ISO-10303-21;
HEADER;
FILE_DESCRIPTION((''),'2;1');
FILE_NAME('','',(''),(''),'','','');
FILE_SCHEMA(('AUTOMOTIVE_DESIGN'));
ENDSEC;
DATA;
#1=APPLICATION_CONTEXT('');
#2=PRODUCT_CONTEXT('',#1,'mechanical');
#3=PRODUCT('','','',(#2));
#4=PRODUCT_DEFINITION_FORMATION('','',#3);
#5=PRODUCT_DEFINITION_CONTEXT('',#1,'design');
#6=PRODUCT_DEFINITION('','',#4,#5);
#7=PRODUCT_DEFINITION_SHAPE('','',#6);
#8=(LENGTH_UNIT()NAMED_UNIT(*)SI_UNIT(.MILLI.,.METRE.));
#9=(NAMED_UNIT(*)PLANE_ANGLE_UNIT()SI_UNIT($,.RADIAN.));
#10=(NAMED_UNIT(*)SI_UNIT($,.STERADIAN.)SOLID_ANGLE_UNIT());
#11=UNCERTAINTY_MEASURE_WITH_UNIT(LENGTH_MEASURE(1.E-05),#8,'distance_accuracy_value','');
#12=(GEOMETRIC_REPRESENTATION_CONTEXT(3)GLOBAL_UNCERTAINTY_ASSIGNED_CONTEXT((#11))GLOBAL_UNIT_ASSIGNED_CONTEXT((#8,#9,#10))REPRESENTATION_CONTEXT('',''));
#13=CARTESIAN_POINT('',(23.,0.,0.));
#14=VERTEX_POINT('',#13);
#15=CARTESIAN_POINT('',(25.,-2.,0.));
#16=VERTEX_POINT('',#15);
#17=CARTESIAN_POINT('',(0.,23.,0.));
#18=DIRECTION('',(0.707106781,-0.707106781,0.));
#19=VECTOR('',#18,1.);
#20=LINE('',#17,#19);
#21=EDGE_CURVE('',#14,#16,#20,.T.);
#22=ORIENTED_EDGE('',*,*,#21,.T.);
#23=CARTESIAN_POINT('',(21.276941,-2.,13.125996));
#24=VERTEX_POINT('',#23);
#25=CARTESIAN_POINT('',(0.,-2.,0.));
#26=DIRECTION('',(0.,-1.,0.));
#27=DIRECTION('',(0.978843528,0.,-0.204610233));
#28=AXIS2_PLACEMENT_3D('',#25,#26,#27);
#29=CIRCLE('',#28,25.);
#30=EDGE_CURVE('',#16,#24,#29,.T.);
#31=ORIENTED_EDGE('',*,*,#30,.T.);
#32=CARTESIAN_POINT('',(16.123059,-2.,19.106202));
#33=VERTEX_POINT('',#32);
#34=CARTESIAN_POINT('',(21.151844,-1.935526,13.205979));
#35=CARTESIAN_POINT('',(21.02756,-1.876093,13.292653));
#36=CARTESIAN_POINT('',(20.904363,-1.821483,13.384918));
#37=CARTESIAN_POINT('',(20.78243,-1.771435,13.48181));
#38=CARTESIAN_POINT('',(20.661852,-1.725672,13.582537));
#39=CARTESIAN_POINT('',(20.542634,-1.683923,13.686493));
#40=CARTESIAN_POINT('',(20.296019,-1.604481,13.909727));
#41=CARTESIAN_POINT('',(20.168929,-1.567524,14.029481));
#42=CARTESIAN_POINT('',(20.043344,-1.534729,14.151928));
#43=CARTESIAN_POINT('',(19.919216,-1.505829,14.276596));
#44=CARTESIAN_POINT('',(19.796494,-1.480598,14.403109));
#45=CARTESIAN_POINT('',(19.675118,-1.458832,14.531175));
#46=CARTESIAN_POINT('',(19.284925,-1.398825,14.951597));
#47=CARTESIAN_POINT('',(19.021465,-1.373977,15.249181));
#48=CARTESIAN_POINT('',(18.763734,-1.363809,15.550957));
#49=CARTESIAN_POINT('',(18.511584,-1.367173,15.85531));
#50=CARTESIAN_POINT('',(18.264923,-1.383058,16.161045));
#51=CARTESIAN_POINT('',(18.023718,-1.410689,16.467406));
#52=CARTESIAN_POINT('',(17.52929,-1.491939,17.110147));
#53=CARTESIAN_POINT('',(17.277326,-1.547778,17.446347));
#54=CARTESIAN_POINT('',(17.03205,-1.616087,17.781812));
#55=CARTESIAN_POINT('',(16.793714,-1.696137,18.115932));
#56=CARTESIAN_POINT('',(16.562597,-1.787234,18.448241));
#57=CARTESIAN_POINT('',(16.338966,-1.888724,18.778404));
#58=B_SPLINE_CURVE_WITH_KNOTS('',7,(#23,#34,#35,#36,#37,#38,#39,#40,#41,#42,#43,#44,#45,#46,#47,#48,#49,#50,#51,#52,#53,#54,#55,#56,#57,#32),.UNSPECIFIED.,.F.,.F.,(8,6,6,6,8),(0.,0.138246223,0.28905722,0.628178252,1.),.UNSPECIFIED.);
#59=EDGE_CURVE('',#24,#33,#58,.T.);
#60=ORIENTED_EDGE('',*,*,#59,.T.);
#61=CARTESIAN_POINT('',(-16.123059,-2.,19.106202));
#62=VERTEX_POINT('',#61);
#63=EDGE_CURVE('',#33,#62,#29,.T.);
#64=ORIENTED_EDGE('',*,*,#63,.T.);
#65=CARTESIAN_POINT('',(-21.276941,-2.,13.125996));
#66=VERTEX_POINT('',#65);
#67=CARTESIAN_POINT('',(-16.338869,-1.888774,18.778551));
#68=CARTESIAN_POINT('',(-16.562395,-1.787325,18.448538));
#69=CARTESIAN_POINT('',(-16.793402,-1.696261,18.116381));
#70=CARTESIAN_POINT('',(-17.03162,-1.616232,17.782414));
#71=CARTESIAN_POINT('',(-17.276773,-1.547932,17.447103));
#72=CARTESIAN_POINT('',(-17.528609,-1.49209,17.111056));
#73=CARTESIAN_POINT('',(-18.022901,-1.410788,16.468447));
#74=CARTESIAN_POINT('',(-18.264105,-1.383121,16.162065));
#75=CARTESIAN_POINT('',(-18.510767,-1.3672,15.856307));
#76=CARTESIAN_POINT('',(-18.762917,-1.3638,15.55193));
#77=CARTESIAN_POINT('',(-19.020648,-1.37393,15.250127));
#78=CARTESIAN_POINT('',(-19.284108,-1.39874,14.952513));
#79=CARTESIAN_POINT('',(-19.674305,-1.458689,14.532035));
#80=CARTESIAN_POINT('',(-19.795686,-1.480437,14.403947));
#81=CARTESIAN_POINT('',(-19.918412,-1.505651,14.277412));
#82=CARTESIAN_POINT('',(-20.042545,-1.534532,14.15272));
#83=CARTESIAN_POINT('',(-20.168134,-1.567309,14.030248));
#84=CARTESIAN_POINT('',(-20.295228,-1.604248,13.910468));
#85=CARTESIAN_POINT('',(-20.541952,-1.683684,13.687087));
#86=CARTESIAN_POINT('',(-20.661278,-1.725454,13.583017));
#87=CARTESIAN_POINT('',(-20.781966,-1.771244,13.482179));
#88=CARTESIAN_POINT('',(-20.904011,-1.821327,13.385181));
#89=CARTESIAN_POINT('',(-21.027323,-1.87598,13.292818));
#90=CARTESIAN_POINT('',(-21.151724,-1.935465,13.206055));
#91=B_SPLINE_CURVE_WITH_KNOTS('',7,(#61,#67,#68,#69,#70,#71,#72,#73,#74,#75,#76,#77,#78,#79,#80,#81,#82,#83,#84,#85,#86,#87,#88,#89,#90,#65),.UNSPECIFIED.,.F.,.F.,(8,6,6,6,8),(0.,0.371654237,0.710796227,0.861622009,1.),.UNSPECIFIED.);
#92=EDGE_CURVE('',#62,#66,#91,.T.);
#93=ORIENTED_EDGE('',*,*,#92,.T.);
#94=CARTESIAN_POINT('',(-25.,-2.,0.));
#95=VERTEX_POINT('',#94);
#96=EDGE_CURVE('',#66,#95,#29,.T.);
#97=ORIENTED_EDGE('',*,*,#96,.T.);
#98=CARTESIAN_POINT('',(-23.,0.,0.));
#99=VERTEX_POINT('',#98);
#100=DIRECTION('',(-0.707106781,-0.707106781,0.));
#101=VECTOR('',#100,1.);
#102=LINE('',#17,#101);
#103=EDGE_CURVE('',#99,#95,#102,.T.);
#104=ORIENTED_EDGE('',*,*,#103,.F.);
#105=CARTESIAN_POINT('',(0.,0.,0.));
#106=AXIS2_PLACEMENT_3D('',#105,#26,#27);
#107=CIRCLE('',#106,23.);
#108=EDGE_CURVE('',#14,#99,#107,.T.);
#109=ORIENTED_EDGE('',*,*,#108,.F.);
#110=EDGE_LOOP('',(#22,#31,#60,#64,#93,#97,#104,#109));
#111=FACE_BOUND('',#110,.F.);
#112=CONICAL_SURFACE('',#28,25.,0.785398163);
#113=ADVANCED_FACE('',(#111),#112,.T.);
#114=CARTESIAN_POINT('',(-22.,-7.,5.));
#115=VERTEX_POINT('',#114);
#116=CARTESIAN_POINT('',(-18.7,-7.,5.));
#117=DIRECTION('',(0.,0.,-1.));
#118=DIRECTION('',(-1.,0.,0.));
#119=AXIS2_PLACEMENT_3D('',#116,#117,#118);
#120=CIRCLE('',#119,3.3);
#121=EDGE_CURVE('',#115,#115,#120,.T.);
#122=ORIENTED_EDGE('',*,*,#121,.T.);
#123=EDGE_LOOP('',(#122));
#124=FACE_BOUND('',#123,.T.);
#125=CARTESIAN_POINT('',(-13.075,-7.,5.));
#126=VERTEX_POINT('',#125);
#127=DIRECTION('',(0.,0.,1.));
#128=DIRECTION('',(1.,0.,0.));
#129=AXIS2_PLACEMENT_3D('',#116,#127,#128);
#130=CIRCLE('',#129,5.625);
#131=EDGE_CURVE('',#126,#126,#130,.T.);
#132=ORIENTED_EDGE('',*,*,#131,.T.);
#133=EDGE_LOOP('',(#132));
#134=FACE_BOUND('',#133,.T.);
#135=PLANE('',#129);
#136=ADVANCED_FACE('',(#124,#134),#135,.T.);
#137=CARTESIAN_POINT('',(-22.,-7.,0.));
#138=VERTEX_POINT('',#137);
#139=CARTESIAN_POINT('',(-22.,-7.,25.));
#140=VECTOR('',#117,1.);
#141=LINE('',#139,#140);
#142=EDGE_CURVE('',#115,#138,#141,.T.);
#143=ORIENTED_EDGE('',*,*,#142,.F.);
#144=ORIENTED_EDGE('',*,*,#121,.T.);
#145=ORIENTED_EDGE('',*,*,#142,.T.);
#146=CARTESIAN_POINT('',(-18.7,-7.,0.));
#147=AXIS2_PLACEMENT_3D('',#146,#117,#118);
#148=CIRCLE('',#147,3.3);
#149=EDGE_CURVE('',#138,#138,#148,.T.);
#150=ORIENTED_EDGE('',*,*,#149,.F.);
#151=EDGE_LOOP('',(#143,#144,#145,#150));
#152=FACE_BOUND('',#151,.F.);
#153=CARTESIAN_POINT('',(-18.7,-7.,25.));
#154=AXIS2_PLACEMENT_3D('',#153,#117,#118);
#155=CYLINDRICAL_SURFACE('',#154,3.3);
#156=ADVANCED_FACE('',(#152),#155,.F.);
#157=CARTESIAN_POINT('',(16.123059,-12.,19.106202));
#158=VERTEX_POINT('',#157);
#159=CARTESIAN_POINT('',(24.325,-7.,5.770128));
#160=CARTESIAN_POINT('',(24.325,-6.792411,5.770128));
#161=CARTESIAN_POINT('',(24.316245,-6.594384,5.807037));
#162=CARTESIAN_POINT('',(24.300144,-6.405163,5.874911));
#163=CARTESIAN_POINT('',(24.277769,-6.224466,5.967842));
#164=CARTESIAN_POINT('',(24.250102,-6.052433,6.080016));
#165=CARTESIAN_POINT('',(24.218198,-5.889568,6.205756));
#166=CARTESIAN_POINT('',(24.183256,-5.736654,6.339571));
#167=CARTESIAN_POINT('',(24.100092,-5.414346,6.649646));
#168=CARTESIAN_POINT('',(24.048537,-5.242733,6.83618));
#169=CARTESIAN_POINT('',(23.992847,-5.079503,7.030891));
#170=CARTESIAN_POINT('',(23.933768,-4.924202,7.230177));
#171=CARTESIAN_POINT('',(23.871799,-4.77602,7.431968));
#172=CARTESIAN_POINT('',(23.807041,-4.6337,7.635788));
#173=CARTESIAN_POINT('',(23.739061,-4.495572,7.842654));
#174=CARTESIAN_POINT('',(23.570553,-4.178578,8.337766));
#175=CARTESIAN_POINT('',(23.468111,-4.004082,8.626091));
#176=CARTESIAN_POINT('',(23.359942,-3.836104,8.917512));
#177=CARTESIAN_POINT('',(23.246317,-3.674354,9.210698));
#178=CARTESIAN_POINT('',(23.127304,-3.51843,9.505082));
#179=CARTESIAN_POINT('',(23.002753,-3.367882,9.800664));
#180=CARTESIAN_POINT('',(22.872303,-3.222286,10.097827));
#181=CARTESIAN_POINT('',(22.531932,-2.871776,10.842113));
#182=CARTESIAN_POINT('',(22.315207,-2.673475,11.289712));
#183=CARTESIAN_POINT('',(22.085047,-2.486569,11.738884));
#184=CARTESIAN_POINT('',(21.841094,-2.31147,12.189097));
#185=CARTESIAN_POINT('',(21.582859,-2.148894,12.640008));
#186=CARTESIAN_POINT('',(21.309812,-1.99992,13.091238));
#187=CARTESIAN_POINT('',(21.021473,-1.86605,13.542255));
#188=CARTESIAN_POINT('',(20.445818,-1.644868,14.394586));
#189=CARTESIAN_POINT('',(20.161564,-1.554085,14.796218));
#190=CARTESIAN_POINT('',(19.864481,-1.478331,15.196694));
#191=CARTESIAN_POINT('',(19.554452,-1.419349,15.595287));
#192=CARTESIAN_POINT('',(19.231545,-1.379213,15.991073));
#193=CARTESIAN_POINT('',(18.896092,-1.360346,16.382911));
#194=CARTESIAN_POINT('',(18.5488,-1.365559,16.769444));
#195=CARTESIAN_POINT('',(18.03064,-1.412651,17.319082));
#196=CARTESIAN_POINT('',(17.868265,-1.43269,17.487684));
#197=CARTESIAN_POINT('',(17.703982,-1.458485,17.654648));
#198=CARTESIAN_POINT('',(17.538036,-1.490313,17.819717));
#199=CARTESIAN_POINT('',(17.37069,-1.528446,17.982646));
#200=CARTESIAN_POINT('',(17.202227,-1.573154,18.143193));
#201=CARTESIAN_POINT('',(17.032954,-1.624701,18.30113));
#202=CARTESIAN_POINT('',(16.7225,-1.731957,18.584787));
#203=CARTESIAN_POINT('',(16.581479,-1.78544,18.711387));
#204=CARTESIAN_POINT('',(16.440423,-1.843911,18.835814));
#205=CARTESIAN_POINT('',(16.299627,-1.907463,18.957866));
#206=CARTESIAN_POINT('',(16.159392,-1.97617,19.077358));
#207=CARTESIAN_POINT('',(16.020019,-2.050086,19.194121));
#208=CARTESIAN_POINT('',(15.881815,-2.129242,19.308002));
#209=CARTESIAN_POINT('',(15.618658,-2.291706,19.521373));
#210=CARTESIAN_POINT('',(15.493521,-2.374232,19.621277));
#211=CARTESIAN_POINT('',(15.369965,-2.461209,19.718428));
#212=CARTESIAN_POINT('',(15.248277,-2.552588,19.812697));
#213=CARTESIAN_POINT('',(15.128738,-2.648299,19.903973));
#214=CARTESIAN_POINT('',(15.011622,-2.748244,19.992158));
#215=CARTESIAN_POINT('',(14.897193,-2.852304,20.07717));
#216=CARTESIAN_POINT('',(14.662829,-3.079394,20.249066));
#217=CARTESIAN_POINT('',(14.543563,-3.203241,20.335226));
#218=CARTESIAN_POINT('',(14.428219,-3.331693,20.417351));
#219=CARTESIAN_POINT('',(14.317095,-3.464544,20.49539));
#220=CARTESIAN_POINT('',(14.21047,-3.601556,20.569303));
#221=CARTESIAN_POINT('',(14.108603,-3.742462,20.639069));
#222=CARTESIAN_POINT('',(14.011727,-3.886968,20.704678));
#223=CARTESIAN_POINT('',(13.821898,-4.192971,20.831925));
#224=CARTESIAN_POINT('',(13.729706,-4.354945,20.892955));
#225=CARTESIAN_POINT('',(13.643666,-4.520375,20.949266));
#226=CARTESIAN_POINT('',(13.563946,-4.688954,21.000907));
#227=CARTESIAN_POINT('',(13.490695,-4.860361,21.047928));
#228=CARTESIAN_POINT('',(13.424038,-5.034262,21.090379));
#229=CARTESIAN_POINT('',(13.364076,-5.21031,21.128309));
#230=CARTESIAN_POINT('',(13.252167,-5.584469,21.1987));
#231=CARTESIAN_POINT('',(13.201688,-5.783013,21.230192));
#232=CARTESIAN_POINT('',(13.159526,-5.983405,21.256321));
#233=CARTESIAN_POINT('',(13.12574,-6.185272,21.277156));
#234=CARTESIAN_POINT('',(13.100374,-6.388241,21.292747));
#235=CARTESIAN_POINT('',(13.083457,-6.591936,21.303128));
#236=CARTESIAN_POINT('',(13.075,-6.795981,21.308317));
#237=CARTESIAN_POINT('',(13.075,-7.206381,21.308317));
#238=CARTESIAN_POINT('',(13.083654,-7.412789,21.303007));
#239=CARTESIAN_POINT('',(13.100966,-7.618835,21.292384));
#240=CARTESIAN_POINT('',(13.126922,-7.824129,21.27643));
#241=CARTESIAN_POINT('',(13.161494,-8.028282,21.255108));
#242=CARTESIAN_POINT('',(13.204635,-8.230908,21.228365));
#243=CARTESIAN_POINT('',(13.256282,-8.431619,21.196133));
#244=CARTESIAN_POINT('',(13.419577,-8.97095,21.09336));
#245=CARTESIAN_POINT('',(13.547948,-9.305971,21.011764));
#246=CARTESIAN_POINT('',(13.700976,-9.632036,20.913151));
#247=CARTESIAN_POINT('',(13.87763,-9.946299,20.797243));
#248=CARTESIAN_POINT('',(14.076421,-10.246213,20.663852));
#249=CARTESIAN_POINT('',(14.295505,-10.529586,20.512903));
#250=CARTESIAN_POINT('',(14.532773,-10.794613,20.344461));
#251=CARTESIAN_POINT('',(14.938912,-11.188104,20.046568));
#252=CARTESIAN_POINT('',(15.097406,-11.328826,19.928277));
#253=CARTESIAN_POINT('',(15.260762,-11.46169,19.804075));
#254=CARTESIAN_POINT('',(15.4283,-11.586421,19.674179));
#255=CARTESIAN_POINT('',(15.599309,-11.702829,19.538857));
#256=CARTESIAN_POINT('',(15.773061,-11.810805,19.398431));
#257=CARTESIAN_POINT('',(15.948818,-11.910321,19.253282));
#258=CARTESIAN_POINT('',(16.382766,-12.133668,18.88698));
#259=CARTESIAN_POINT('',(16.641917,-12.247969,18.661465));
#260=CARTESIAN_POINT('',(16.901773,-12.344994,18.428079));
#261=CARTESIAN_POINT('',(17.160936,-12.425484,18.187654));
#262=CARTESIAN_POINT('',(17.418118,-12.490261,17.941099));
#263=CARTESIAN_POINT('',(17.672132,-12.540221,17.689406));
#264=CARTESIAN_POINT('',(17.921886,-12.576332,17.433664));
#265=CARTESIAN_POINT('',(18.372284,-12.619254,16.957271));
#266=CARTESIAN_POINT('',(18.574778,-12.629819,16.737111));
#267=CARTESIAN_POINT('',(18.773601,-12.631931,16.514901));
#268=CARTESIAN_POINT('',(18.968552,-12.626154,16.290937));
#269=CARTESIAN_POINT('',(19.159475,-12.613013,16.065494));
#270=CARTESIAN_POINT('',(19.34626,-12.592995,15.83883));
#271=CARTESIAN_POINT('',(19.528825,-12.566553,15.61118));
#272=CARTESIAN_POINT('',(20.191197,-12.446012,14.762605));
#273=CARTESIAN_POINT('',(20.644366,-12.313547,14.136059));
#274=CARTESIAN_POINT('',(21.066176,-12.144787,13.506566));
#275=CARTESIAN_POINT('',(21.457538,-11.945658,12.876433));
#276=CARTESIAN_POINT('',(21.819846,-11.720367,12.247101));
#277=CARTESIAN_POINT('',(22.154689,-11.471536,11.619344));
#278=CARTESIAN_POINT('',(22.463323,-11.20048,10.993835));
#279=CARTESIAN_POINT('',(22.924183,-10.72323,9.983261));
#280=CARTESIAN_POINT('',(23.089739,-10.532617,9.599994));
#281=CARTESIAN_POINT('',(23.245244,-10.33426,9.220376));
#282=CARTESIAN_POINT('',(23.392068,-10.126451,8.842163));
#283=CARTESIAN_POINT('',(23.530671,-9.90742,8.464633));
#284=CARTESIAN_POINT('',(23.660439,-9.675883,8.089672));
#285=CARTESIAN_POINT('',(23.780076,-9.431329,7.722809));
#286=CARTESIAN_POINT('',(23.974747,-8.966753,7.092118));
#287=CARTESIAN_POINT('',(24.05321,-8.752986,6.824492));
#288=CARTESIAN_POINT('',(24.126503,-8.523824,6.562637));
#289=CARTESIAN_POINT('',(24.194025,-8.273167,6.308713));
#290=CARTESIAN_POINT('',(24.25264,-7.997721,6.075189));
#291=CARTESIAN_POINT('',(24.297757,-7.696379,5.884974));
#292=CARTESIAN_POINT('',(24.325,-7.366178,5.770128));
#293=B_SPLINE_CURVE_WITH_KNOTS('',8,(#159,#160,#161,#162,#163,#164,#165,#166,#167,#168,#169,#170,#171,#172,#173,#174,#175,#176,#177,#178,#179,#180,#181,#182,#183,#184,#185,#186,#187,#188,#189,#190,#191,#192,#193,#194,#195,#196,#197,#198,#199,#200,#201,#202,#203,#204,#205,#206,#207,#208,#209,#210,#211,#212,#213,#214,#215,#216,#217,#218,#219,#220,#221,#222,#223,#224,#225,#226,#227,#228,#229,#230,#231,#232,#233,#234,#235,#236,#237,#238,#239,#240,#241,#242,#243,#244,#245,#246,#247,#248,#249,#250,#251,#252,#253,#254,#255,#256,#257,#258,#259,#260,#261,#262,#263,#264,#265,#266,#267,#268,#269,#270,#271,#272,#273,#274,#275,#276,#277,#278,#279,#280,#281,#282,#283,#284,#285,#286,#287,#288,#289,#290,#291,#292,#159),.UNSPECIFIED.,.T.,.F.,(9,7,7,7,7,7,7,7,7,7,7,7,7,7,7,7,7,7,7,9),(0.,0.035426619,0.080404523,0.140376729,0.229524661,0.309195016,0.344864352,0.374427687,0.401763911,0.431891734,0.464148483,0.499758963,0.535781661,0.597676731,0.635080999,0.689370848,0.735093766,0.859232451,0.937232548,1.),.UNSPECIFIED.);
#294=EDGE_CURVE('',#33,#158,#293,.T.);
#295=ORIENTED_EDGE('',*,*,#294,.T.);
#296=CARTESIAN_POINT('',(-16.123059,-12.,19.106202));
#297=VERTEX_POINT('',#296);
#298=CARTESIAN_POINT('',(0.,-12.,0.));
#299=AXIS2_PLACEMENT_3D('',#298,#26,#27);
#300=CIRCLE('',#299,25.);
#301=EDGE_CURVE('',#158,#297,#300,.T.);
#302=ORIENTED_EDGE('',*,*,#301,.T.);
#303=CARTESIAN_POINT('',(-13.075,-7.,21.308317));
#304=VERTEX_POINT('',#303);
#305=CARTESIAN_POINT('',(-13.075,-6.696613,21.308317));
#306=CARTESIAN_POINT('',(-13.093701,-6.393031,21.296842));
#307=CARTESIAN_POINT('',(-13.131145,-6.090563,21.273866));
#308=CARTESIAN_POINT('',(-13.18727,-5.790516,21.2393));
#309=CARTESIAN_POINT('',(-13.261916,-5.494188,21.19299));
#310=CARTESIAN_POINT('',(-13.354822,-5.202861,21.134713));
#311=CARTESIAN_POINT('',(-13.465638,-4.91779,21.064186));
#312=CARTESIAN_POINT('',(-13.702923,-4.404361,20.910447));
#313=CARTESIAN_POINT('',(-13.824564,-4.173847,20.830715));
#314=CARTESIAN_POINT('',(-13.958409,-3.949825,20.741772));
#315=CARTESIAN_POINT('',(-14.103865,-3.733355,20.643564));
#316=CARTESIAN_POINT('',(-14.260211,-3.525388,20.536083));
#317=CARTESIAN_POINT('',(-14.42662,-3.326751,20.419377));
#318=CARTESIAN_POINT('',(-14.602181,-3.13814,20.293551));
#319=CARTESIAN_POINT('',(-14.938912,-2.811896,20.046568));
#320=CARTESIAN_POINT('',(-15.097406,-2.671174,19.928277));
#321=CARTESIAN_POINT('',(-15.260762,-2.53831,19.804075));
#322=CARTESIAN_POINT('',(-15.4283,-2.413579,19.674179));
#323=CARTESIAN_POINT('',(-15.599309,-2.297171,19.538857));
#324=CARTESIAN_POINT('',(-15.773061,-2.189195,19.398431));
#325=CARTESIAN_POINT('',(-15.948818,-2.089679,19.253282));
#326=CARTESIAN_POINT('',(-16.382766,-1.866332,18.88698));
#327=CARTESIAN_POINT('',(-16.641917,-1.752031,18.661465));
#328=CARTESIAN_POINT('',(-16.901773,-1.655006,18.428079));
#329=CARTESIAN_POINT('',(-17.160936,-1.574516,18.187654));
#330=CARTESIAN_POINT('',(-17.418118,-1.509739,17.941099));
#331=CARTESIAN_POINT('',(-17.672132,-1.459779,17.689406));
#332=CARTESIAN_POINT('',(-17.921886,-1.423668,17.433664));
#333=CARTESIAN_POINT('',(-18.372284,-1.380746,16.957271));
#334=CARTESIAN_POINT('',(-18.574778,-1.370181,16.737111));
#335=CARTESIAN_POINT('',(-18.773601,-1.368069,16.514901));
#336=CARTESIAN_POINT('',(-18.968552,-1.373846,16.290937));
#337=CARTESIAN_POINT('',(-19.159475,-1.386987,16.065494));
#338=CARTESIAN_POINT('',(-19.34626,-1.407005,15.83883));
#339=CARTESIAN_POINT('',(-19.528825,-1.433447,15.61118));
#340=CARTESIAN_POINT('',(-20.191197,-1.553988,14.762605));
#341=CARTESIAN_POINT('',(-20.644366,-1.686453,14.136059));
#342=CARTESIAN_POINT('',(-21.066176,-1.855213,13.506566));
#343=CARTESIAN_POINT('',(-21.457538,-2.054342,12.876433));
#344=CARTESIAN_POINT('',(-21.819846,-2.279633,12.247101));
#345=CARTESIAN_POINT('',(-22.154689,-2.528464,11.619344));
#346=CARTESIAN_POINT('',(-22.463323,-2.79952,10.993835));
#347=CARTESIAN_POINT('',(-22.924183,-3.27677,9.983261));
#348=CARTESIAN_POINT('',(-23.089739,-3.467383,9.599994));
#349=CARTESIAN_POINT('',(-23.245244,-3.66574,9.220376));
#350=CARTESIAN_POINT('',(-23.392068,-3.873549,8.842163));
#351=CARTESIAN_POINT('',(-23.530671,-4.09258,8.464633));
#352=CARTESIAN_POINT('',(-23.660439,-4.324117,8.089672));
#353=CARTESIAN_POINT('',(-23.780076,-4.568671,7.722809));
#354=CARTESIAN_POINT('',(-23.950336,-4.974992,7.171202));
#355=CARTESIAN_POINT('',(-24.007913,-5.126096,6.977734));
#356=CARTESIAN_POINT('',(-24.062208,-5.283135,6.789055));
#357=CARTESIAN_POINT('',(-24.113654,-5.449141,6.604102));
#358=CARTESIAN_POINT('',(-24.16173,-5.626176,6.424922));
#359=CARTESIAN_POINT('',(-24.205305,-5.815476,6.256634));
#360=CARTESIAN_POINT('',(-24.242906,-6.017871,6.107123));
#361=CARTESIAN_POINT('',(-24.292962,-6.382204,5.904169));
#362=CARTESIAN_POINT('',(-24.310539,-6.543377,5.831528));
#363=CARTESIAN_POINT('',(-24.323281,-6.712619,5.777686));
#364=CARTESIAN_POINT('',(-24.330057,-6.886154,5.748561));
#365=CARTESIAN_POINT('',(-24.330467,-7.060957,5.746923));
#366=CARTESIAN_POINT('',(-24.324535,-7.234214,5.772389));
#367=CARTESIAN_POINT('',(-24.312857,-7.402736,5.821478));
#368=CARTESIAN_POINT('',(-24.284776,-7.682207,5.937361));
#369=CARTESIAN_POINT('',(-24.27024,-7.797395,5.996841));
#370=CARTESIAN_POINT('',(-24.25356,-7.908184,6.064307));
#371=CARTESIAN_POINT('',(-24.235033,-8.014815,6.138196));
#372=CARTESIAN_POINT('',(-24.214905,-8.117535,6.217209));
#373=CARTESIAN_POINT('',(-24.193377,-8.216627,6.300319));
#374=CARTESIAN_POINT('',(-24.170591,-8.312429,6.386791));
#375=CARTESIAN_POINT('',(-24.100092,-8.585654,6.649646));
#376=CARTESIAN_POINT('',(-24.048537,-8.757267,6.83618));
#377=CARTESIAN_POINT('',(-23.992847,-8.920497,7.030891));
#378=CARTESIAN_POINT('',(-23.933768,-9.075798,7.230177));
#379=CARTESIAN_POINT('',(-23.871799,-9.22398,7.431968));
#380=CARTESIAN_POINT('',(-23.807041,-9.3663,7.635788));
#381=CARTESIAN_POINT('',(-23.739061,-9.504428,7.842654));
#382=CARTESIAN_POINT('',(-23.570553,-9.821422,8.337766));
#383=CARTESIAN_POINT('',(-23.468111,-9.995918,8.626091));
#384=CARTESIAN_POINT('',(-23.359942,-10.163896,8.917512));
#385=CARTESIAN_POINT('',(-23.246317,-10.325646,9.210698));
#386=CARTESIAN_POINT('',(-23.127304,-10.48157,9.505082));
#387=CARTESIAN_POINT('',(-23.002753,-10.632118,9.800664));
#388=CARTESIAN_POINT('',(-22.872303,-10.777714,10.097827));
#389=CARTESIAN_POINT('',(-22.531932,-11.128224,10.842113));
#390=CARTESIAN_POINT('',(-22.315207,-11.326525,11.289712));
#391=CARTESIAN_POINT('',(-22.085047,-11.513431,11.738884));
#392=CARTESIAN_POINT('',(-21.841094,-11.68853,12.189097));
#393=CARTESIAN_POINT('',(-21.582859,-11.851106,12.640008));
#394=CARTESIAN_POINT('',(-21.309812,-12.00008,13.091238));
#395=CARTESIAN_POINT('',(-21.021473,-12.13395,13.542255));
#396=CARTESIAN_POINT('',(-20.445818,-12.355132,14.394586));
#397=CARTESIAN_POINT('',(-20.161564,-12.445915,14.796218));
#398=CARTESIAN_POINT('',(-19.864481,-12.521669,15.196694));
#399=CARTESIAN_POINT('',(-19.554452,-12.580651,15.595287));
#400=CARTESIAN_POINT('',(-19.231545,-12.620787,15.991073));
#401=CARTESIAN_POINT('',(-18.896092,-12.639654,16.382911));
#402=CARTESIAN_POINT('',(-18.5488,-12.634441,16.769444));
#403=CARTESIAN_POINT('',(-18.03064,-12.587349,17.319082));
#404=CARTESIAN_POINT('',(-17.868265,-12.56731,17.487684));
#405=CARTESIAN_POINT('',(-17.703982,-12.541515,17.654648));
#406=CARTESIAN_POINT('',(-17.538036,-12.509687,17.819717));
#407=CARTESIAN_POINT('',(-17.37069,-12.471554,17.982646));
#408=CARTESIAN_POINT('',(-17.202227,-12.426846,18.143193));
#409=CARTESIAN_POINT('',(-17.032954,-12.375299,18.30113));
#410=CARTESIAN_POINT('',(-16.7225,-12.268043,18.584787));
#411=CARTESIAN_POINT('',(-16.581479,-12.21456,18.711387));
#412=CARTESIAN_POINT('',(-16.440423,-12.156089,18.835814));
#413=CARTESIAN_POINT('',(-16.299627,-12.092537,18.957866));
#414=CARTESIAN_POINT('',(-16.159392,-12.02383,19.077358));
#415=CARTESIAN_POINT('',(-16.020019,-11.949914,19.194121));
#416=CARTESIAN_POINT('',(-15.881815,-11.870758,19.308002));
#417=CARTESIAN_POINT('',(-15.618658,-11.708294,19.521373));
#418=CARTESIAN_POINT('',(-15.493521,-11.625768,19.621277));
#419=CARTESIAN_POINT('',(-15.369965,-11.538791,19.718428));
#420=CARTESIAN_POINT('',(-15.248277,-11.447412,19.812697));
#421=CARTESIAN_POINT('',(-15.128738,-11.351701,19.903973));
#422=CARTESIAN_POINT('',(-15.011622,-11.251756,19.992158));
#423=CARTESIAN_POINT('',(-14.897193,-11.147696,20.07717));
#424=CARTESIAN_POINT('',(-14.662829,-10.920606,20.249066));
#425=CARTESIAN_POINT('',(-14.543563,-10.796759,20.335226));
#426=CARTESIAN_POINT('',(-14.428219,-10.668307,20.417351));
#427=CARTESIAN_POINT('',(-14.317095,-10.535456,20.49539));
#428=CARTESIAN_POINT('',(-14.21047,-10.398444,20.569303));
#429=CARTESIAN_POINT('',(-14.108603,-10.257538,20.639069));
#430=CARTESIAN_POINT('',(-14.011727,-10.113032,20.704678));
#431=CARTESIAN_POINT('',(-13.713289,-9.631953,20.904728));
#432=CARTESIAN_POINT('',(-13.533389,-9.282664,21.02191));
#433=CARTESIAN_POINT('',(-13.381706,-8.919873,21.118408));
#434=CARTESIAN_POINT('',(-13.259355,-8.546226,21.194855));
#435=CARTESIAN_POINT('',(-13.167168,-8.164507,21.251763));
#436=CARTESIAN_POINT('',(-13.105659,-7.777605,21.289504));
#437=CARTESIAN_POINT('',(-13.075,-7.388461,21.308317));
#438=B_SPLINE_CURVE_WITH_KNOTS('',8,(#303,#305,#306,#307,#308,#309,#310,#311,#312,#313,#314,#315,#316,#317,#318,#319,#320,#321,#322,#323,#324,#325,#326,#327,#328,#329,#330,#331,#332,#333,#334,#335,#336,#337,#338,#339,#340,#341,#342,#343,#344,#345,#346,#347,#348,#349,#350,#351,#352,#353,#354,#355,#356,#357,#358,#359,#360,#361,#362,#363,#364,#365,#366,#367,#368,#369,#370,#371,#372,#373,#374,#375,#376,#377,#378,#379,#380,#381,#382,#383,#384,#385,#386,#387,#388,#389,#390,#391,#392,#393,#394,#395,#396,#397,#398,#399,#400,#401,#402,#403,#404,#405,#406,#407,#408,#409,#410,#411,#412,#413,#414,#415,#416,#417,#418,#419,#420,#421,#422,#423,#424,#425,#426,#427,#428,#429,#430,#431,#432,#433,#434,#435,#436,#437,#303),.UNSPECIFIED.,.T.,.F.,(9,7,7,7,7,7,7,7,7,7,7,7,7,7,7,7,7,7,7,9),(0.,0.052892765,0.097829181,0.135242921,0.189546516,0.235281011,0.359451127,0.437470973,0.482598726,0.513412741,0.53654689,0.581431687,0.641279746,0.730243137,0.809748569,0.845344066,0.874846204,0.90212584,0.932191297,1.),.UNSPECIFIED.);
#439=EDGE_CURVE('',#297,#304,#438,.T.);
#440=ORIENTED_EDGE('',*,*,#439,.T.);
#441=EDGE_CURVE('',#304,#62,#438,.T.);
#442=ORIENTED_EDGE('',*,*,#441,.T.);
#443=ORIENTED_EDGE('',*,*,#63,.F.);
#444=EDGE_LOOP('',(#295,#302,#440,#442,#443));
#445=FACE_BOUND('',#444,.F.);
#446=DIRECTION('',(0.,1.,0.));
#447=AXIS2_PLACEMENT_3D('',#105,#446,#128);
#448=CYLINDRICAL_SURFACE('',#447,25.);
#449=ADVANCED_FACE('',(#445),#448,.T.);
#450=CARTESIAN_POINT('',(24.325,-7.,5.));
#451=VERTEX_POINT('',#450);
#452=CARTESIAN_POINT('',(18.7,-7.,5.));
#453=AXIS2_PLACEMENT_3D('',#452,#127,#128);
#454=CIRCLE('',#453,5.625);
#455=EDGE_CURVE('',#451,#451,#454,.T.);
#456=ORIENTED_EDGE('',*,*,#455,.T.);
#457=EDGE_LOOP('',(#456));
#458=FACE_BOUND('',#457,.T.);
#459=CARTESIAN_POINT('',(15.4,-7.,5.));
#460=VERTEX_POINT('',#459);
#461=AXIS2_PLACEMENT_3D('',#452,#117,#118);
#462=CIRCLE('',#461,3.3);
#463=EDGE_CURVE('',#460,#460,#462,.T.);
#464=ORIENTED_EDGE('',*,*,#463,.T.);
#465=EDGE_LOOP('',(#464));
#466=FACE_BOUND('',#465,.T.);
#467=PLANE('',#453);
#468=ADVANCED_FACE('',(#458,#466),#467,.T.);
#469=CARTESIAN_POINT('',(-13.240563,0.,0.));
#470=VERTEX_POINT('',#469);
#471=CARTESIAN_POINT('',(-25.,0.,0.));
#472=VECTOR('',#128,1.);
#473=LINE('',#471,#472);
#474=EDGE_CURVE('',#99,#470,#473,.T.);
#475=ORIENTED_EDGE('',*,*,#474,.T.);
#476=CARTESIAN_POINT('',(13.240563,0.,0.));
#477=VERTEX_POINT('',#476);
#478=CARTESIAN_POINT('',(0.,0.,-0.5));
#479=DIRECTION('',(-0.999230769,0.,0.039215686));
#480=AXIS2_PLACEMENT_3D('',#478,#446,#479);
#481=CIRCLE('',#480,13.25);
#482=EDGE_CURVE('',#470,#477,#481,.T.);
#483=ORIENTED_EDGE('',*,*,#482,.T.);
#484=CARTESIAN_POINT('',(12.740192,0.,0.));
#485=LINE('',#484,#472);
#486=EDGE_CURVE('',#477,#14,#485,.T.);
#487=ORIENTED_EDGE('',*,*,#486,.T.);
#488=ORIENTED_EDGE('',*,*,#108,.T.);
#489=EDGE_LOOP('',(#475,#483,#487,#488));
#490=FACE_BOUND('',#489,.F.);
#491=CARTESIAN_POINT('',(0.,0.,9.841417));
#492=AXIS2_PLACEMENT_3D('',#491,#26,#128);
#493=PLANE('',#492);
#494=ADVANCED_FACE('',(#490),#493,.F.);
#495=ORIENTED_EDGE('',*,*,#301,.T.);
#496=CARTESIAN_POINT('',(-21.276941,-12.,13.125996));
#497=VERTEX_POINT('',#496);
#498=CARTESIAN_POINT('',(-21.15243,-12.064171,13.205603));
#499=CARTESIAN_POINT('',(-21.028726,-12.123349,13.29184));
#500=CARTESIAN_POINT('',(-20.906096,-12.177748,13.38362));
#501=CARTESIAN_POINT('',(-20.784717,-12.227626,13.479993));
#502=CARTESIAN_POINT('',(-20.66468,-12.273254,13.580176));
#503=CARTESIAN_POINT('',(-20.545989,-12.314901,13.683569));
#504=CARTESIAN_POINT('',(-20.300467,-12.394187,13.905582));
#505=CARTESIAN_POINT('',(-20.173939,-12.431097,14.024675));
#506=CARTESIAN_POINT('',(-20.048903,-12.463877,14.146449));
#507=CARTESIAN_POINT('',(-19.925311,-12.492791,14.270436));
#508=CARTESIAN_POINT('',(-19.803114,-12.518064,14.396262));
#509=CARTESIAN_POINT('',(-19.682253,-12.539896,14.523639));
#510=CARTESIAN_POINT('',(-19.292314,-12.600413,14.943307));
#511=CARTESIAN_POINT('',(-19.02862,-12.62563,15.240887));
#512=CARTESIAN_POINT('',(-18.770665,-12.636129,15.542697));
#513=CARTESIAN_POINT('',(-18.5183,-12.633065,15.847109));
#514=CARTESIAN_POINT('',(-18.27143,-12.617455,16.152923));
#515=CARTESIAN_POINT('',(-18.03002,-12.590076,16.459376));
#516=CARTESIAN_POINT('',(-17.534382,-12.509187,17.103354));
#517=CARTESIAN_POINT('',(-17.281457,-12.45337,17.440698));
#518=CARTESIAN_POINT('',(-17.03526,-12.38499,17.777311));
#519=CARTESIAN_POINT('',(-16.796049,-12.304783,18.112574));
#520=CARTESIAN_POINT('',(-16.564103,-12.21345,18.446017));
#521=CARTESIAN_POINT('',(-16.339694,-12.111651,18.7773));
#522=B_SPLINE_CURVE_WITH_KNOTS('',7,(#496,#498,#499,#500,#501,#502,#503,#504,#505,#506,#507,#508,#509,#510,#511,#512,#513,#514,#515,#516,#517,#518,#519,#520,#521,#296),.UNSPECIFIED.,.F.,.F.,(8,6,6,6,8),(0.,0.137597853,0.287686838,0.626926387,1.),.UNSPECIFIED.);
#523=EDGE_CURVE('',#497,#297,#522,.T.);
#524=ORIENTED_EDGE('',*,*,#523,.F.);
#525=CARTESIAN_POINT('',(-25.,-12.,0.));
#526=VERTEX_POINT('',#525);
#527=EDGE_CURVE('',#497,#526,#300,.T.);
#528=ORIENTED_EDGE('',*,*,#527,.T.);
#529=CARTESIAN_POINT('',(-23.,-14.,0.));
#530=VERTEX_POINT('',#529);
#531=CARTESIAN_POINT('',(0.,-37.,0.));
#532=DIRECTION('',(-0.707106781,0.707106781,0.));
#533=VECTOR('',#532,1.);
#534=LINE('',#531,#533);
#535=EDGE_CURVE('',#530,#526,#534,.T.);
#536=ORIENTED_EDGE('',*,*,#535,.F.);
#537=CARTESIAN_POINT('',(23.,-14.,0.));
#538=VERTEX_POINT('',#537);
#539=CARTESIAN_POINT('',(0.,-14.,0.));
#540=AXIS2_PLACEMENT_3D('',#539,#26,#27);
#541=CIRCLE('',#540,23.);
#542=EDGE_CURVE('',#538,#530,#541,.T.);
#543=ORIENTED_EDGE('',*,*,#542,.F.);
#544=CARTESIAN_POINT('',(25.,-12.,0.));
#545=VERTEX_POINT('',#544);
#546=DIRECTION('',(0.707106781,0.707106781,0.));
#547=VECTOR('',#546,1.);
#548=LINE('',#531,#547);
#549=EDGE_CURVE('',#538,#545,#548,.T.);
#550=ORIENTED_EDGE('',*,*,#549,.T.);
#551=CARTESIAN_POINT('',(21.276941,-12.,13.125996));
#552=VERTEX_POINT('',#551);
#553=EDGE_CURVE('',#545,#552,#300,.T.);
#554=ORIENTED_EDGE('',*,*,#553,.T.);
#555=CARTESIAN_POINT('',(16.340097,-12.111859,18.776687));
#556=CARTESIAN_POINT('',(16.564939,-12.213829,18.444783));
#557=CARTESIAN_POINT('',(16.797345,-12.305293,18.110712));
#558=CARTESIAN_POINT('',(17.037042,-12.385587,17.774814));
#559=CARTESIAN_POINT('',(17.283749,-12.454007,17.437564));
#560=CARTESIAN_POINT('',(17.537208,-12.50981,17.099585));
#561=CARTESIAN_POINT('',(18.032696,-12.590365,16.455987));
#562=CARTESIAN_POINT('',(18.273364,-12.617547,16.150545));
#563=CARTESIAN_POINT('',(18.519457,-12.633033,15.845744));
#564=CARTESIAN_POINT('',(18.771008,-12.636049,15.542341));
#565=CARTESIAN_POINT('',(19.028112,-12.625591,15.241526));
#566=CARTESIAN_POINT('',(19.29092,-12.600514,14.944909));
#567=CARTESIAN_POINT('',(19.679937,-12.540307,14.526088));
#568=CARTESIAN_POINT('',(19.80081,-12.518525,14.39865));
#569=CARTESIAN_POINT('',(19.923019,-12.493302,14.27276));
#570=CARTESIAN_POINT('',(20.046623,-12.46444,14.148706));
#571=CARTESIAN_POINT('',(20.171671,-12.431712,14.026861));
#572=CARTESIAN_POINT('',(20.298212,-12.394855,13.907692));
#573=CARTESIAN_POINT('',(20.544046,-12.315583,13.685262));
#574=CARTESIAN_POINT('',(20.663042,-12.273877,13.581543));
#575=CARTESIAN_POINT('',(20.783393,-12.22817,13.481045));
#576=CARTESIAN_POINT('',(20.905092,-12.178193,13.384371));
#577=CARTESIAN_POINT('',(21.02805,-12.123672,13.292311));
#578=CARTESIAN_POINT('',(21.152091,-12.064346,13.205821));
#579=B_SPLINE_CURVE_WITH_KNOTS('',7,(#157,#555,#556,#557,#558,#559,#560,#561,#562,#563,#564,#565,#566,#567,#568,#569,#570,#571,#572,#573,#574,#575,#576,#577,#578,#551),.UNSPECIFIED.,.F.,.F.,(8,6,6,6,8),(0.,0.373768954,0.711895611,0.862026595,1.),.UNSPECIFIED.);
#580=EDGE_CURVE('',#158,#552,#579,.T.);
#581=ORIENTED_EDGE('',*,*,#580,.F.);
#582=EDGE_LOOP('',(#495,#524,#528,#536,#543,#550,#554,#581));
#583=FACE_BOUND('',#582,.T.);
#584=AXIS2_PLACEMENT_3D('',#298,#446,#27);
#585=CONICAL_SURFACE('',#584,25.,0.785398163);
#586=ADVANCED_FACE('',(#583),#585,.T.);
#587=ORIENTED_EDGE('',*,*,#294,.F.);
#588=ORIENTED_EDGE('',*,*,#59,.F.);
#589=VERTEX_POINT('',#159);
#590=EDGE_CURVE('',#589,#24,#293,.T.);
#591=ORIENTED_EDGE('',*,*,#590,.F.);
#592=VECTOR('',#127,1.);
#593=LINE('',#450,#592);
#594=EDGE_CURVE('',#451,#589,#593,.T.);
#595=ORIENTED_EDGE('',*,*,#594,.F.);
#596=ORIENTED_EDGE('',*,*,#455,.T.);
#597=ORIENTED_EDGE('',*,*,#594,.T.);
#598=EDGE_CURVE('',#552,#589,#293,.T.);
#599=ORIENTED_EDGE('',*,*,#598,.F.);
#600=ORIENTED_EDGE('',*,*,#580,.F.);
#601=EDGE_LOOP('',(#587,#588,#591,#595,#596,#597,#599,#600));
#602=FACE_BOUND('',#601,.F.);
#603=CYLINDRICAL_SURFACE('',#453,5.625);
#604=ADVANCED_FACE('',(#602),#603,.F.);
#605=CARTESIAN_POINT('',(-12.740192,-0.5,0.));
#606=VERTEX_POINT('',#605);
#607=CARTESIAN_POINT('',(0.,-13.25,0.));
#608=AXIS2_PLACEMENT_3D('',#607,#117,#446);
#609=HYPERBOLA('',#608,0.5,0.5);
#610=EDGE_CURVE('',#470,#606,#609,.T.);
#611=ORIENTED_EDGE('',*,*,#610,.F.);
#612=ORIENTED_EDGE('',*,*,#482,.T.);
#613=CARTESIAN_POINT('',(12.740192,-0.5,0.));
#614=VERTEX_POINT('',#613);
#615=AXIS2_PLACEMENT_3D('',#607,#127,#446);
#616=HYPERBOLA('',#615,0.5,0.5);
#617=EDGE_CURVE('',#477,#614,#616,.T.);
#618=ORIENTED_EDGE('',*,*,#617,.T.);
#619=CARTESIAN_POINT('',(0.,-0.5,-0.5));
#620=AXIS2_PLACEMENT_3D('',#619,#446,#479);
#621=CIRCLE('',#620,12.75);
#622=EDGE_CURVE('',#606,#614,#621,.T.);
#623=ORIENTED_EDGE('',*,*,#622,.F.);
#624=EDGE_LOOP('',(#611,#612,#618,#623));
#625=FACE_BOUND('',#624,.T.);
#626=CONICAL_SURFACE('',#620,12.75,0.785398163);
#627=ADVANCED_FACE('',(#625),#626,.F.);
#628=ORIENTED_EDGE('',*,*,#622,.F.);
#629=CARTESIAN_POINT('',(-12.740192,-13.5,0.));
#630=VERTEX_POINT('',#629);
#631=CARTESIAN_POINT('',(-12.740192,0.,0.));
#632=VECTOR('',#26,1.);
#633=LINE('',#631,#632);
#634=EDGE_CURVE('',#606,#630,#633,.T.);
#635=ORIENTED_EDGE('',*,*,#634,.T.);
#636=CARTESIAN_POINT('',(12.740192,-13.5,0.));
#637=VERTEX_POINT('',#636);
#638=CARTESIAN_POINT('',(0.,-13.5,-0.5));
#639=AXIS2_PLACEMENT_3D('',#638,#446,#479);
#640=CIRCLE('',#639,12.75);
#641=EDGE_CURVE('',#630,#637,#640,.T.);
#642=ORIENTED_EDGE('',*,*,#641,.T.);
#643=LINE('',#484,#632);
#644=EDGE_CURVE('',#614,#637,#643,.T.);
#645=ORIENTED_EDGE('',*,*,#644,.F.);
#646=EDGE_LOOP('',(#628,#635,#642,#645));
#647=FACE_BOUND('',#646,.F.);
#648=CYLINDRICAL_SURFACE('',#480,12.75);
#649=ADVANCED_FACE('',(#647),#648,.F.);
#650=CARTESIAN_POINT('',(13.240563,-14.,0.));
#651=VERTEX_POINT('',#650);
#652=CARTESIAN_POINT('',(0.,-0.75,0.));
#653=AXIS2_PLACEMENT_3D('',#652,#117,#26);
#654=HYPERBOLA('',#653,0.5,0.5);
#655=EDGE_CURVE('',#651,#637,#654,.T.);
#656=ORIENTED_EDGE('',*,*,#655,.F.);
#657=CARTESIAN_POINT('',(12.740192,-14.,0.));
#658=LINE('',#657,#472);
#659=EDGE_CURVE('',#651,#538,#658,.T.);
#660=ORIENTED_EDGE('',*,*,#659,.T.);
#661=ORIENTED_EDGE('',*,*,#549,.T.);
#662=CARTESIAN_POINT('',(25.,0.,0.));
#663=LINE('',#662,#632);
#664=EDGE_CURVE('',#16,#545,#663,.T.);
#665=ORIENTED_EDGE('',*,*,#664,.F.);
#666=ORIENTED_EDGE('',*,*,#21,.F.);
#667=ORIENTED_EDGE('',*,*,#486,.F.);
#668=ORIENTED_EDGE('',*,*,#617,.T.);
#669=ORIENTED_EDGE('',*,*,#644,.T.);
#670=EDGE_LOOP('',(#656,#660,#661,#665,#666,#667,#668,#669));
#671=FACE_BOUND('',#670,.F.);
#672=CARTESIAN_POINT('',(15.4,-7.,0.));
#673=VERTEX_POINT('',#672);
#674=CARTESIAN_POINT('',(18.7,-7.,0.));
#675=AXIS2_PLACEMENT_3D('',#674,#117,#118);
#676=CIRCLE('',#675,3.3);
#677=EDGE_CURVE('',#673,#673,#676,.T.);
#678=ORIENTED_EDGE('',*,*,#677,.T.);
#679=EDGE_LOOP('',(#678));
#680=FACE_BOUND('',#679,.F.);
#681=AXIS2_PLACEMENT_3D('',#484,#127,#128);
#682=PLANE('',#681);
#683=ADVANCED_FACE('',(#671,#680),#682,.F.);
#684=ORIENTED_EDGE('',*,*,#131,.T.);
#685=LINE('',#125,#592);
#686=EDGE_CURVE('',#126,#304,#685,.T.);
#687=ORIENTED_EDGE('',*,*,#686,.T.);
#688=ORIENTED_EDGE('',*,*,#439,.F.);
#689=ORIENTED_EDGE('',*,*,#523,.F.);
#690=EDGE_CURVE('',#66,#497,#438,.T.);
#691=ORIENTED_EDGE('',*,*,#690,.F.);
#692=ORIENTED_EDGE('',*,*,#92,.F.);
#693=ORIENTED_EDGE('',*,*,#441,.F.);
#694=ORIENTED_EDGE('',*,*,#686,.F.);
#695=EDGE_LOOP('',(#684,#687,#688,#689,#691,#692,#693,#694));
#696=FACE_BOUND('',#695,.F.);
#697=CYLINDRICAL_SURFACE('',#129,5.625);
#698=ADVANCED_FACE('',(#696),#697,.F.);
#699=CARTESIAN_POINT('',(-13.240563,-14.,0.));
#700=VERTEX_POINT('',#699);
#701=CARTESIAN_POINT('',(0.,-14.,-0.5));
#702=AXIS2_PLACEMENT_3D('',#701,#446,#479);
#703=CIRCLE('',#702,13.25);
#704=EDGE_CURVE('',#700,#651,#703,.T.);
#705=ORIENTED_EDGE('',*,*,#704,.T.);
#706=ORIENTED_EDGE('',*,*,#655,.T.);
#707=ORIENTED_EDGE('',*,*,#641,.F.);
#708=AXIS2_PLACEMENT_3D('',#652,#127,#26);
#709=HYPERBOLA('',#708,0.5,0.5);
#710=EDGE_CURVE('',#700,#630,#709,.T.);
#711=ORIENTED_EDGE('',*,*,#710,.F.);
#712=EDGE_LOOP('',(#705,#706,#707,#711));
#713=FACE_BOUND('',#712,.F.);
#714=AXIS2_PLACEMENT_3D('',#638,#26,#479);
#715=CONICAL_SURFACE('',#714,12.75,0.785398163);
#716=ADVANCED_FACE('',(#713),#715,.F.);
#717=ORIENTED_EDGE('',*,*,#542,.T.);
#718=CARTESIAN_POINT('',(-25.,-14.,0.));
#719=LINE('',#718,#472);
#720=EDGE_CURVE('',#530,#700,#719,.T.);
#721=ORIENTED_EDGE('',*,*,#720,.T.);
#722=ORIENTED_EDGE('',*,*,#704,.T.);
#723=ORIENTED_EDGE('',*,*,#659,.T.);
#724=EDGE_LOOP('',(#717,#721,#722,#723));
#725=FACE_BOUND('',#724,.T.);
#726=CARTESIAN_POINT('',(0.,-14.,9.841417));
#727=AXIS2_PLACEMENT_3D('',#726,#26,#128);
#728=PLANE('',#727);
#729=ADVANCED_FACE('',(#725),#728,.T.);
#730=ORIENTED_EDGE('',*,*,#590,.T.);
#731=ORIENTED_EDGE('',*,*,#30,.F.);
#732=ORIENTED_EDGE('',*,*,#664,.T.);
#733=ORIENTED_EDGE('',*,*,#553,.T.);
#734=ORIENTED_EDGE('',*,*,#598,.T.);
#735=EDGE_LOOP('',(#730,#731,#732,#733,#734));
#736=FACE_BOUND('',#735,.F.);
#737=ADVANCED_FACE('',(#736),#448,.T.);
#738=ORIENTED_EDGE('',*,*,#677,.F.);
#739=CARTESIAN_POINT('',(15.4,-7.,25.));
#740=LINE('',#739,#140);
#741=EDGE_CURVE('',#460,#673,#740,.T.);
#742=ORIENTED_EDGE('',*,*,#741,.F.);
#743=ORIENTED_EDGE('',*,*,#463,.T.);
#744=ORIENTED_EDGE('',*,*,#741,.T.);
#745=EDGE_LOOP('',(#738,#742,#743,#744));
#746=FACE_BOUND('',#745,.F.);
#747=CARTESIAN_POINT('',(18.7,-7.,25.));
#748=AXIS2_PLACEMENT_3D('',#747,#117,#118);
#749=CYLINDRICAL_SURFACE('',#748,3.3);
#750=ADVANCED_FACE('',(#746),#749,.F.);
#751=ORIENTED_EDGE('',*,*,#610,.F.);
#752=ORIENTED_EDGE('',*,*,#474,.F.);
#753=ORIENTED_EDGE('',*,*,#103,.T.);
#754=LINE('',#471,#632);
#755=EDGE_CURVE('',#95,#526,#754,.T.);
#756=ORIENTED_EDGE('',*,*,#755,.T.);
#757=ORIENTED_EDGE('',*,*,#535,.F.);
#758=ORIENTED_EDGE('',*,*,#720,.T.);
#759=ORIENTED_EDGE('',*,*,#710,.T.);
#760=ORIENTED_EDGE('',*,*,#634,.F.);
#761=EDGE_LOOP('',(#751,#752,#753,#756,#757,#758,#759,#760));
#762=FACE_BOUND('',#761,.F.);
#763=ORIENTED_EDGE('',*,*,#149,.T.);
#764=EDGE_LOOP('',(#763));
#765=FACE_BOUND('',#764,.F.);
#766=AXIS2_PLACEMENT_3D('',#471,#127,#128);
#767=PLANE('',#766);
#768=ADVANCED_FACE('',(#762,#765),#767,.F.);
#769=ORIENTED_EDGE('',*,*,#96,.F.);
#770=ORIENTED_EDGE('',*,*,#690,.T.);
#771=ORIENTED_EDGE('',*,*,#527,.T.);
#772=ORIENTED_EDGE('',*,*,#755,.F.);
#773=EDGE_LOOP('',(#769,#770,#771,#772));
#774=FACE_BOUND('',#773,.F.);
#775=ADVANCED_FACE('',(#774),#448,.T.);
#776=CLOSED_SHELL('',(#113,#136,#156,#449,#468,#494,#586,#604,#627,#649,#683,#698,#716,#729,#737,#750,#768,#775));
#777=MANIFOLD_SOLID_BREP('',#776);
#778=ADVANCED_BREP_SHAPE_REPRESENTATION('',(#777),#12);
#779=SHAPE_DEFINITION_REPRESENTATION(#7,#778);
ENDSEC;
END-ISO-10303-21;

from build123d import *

# Parameters (mm, degrees)
F1_DEPTH       = 14
F4_D           = 6.6
F4_DEPTH       = 30
F4_CBORE_D     = 11.25
F4_CBORE_DEPTH = 20
F4_TIP         = 1.9828400428
F5_T2_ANGLE    = 203.6133668192
F5_T4_ANGLE    = 203.6133668192
F6_SIZE        = 0.5


# Not quite as in the source:
# - a fillet or chamfer that OpenCascade refuses, or shapes differently, is made with other operations: its cross-section is extruded or revolved along the edge and cut away or added


with BuildPart() as f1:
    # F0 (on Front) → F1 (new body)
    with BuildSketch(Plane.XZ):
        with BuildLine():
            Line((12.7401923062, 0), (25, 0))
            ThreePointArc((25, 0), (0, 25), (-25, 0))
            Line((-25, 0), (-12.7401923062, 0))
            ThreePointArc((-12.7401923062, 0), (0, 12.25), (12.7401923062, 0))
        make_face()
    extrude(amount=F1_DEPTH)

    # F4
    with Locations(Plane.XY.offset(25)):
        with Locations((-18.7, -7), (18.7, -7)):
            CounterBoreHole(F4_D / 2, F4_CBORE_D / 2, F4_CBORE_DEPTH, depth=F4_DEPTH)
            with Locations((0, 0, -(F4_DEPTH + F4_TIP / 2))):  # 118° drill point
                Cone(0, F4_D / 2, F4_TIP, mode=Mode.SUBTRACT)

    # F5: chamfer of 2 on 2 edges, made by hand

    # F5_s1 → F5_t2 (revolve, cut)
    with BuildSketch(Plane(origin=(0, 0, 0), x_dir=(0, 1, 0), z_dir=(-0.2046102329, 0, -0.9788435281))):
        Polygon((-12, 25), (-14, 23), (-14, 25), align=None)
    revolve(axis=Axis((0, -14, 0), (0, -1, 0)), revolution_arc=F5_T2_ANGLE, mode=Mode.SUBTRACT)

    # F5_s3 → F5_t4 (revolve, cut)
    with BuildSketch(Plane(origin=(0, 0, 0), x_dir=(0, 1, 0), z_dir=(-0.2046102329, 0, -0.9788435281))):
        Polygon((-2, 25), (0, 23), (0, 25), align=None)
    revolve(axis=Axis((0, 0, 0), (0, -1, 0)), revolution_arc=F5_T4_ANGLE, mode=Mode.SUBTRACT)

    # F6
    f6_edges = [f1.edges().sort_by_distance(p)[0] for p in [
        (0, -14, 12.25),
        (0, 0, 12.25),
    ]]
    chamfer(f6_edges, length=F6_SIZE)


solid = f1.part
